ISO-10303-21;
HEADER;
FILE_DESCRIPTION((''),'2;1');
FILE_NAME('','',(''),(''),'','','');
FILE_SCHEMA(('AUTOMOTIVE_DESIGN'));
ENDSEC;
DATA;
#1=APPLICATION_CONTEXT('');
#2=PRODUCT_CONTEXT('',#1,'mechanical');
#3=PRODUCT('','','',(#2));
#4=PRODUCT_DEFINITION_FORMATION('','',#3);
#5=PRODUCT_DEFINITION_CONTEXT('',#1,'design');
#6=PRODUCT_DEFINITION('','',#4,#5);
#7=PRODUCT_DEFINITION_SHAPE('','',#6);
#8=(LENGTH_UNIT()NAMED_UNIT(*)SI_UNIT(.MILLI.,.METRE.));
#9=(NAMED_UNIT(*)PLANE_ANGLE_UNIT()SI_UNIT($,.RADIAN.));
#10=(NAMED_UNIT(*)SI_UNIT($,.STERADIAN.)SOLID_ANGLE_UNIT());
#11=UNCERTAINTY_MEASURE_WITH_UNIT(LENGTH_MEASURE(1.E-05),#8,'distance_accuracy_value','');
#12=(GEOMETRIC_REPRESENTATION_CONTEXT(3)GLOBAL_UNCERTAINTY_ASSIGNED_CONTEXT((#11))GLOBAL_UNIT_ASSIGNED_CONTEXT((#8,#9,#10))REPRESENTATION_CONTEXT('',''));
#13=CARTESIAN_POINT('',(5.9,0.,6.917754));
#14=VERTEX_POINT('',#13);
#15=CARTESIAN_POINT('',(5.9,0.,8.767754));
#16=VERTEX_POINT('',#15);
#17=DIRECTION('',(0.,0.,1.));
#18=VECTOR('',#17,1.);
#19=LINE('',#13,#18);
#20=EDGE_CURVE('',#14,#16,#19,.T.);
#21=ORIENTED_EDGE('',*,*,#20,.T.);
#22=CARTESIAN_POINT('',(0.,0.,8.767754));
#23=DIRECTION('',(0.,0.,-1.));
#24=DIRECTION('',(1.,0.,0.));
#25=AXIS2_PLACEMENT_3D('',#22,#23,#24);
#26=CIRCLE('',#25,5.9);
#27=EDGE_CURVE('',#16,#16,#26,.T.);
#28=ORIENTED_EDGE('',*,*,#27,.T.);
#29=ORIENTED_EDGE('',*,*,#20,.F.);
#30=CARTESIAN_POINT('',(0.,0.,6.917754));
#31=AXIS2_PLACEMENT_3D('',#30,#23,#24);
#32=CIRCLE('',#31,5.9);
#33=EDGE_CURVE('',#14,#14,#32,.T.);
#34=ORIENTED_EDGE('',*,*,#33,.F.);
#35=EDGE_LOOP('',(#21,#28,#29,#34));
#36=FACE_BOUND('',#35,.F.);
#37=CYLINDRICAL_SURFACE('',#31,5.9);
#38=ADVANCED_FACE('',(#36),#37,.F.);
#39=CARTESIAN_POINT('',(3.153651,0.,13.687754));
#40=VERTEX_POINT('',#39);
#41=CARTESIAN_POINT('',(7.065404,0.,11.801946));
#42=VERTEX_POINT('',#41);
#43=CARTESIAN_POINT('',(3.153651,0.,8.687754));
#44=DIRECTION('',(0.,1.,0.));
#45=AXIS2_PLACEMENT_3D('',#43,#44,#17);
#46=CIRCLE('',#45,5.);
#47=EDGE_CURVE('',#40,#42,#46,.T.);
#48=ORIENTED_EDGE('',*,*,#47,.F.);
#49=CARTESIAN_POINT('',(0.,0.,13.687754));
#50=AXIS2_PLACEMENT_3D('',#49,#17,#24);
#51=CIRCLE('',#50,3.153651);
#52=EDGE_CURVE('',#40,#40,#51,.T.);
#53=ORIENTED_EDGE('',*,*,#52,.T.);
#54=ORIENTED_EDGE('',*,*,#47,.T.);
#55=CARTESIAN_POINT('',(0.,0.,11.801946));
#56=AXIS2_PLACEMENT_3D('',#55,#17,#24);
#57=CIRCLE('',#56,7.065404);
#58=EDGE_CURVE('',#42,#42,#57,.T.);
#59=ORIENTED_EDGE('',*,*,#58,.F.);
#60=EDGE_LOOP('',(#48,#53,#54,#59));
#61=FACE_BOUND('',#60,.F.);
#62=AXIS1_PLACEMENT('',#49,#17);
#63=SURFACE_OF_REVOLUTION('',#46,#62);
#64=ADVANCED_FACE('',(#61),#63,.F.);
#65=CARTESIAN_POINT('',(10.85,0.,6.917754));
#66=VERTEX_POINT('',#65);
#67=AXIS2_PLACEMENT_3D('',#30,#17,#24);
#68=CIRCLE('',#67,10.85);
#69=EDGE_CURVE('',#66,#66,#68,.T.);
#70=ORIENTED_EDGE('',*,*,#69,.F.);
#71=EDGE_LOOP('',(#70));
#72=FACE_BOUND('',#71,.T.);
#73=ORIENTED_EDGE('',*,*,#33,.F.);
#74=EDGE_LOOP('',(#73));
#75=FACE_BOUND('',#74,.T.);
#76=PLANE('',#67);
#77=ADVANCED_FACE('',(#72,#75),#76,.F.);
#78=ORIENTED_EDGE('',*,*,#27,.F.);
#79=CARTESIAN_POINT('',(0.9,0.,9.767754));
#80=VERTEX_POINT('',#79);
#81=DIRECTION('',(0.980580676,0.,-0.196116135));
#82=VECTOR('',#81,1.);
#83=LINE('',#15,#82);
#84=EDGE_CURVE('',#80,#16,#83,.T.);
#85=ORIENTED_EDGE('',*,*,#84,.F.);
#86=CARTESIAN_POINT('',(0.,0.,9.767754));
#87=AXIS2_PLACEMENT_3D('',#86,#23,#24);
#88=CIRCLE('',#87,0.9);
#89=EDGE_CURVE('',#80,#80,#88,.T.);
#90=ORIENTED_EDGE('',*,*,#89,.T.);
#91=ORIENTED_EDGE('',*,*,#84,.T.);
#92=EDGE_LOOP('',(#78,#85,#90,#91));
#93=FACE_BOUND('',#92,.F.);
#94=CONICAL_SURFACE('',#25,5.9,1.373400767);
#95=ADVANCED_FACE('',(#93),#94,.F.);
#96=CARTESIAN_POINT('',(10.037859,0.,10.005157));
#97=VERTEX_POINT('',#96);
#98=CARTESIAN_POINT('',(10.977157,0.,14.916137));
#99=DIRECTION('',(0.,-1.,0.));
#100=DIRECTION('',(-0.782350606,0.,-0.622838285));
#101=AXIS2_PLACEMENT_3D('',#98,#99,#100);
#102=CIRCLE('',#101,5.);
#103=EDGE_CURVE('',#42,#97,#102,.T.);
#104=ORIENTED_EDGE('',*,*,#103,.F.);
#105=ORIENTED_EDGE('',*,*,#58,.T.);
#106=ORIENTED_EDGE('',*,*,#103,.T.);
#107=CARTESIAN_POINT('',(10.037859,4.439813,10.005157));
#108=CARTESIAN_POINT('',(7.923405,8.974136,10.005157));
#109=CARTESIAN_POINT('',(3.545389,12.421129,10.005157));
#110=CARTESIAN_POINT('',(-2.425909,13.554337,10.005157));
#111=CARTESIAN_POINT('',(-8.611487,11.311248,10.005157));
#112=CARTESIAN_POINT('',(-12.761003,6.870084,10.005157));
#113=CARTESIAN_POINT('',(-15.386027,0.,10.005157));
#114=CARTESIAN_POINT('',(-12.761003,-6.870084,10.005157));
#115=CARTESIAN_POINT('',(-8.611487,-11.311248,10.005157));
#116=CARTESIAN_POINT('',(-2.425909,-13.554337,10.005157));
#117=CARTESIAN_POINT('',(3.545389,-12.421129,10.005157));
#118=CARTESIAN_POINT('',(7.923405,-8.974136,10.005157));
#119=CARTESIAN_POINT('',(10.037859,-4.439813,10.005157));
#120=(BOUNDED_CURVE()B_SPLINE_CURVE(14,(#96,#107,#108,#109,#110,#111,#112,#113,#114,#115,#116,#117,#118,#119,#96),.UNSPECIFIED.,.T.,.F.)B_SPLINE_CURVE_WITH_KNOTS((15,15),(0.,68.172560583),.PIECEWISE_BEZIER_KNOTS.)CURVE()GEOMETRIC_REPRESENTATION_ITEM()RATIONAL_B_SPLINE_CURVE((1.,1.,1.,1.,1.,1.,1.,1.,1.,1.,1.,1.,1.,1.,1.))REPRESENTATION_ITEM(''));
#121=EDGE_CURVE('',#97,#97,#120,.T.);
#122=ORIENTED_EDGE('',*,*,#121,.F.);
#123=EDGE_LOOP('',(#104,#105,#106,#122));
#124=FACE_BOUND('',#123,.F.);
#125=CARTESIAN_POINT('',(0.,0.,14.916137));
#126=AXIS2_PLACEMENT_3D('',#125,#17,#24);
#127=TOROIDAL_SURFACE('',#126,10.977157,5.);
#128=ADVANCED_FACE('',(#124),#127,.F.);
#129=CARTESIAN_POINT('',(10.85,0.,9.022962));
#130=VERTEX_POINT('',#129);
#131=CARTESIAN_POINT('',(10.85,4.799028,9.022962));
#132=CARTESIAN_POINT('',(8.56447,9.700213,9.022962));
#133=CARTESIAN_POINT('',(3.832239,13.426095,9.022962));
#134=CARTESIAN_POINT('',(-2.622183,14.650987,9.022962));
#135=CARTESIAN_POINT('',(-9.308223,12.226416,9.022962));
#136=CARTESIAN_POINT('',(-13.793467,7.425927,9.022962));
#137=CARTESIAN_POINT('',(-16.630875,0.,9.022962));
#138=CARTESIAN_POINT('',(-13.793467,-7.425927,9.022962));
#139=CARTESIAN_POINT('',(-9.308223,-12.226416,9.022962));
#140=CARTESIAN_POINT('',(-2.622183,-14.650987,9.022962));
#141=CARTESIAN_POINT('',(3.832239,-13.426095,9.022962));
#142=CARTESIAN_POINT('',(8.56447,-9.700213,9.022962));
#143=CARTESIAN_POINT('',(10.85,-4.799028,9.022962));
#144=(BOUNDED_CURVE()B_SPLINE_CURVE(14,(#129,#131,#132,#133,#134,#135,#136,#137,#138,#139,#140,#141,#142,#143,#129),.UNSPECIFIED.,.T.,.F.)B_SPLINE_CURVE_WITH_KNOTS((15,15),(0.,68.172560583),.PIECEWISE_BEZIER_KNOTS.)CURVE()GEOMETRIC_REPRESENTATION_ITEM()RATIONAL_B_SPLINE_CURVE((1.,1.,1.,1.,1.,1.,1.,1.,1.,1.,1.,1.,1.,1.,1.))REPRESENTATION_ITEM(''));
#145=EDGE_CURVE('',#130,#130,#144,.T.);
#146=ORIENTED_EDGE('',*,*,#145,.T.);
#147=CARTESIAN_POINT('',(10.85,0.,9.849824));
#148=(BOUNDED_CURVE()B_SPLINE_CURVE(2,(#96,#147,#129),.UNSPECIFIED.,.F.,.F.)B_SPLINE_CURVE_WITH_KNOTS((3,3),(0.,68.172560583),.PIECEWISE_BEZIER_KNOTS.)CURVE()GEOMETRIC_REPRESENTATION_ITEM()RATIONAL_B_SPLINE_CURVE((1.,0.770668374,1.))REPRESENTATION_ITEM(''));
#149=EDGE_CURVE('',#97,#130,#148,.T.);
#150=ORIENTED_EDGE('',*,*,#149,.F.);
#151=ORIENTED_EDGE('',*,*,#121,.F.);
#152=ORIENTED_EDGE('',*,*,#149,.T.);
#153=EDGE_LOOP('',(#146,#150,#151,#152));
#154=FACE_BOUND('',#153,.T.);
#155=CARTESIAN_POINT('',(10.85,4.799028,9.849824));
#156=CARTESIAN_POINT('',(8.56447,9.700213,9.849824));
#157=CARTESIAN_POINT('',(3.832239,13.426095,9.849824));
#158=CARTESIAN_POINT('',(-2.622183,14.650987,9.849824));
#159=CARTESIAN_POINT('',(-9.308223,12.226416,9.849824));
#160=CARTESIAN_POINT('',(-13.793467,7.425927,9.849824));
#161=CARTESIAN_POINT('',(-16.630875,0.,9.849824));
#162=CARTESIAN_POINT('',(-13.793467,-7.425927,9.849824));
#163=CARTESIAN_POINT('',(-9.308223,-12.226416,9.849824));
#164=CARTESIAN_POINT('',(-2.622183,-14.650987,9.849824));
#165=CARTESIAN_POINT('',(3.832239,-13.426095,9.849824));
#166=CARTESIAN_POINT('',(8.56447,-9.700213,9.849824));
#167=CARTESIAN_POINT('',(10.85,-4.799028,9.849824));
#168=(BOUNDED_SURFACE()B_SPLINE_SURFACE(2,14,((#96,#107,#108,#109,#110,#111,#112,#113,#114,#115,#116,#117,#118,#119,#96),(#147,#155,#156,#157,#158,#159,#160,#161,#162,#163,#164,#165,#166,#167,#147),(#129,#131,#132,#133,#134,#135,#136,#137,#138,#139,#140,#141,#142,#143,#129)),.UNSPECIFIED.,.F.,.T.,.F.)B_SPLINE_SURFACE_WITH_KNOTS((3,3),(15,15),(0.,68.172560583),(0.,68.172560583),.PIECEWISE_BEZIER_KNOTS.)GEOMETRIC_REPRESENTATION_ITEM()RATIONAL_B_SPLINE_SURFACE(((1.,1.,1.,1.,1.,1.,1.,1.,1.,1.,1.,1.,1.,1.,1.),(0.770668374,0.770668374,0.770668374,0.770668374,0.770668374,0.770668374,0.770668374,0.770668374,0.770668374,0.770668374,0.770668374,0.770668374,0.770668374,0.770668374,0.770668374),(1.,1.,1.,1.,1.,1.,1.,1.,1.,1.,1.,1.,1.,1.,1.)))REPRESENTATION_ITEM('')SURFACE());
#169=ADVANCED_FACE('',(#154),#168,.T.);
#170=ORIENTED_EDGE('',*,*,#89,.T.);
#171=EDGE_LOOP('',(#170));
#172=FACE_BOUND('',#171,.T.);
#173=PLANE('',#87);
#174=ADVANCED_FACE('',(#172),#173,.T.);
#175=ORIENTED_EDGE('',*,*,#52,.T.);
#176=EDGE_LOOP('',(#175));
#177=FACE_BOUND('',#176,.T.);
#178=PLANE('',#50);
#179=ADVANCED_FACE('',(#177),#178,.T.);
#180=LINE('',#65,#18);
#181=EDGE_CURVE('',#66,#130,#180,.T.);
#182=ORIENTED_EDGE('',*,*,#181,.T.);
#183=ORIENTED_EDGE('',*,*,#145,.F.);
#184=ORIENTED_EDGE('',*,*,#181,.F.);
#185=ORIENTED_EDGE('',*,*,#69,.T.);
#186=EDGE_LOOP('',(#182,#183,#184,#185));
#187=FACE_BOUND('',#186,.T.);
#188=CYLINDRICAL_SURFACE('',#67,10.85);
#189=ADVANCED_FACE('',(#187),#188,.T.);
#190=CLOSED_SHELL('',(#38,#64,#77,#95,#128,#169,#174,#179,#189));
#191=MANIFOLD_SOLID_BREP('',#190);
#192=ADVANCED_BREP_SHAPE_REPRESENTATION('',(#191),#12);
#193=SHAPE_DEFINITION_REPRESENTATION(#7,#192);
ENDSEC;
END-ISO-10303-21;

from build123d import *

# Parameters (mm, degrees)
F4_R     = 1
F5_R     = 5.9
F6_DEPTH = 2.85
F7_SIZE2 = 1
F7_SIZE  = 5


# Not quite as in the source:
# - a fillet or chamfer that OpenCascade refuses, or shapes differently, is made with other operations: its cross-section is extruded or revolved along the edge and cut away or added


with BuildPart() as f1:
    # F0 (on Front) → F1 (revolve)
    with BuildSketch(Plane.XZ):
        Polygon((8, 13.6877541882), (0, 13.6877541882), (0, 6.9177541882), (10.85, 6.9177541882), (10.85, 9.9177541882), (8, 9.9177541882), align=None)
    revolve(axis=Axis((0, 0, 10.3027541882), (0, 0, 1)))

    # F2: fillet of radius 5 on 1 edges, made by hand

    # F2_s1 → F2_t2 (revolve, cut)
    with BuildSketch(Plane.XZ):
        with BuildLine():
            ThreePointArc((3.1536508586, 13.6877541882), (6.2236671452, 12.6342716403), (8, 9.9177541882))
            Line((8, 9.9177541882), (8, 13.6877541882))
            Line((8, 13.6877541882), (3.1536508586, 13.6877541882))
        make_face()
    revolve(axis=Axis((0, 0, 13.6877541882), (0, 0, 1)), mode=Mode.SUBTRACT)

    # F3: fillet of radius 5 on 1 edges, made by hand

    # F3_s1 → F3_t2 (revolve)
    with BuildSketch(Plane.XZ):
        with BuildLine():
            ThreePointArc((7.0654038886, 11.8019456133), (8.7487622666, 10.4401726424), (10.85, 9.9177541882))
            Line((10.85, 9.9177541882), (8, 9.9177541882))
            ThreePointArc((8, 9.9177541882), (7.6328955207, 10.9095478909), (7.0654038886, 11.8019456133))
        make_face()
    revolve(axis=Axis((0, 0, 9.9177541882), (0, 0, 1)))

    # F4
    f4_edges = [f1.edges().sort_by_distance(p)[0] for p in [
        (-10.85, 0, 9.917754),
    ]]
    fillet(f4_edges, radius=F4_R)

    # F5 (on face) → F6 (cut)
    with BuildSketch(Plane(origin=(0, 0, 6.9177541882), x_dir=(1, 0, 0), z_dir=(0, 0, -1))):
        Circle(F5_R)
    extrude(amount=-F6_DEPTH, mode=Mode.SUBTRACT)

    # F7
    f7_edges = [f1.edges().sort_by_distance(p)[0] for p in [
        (-5.9, 0, 9.767754),
    ]]
    f7_side = f1.faces().sort_by_distance((0, 0, 9.767754))[0]
    chamfer(f7_edges, length=F7_SIZE, length2=F7_SIZE2, reference=f7_side)


solid = f1.part
